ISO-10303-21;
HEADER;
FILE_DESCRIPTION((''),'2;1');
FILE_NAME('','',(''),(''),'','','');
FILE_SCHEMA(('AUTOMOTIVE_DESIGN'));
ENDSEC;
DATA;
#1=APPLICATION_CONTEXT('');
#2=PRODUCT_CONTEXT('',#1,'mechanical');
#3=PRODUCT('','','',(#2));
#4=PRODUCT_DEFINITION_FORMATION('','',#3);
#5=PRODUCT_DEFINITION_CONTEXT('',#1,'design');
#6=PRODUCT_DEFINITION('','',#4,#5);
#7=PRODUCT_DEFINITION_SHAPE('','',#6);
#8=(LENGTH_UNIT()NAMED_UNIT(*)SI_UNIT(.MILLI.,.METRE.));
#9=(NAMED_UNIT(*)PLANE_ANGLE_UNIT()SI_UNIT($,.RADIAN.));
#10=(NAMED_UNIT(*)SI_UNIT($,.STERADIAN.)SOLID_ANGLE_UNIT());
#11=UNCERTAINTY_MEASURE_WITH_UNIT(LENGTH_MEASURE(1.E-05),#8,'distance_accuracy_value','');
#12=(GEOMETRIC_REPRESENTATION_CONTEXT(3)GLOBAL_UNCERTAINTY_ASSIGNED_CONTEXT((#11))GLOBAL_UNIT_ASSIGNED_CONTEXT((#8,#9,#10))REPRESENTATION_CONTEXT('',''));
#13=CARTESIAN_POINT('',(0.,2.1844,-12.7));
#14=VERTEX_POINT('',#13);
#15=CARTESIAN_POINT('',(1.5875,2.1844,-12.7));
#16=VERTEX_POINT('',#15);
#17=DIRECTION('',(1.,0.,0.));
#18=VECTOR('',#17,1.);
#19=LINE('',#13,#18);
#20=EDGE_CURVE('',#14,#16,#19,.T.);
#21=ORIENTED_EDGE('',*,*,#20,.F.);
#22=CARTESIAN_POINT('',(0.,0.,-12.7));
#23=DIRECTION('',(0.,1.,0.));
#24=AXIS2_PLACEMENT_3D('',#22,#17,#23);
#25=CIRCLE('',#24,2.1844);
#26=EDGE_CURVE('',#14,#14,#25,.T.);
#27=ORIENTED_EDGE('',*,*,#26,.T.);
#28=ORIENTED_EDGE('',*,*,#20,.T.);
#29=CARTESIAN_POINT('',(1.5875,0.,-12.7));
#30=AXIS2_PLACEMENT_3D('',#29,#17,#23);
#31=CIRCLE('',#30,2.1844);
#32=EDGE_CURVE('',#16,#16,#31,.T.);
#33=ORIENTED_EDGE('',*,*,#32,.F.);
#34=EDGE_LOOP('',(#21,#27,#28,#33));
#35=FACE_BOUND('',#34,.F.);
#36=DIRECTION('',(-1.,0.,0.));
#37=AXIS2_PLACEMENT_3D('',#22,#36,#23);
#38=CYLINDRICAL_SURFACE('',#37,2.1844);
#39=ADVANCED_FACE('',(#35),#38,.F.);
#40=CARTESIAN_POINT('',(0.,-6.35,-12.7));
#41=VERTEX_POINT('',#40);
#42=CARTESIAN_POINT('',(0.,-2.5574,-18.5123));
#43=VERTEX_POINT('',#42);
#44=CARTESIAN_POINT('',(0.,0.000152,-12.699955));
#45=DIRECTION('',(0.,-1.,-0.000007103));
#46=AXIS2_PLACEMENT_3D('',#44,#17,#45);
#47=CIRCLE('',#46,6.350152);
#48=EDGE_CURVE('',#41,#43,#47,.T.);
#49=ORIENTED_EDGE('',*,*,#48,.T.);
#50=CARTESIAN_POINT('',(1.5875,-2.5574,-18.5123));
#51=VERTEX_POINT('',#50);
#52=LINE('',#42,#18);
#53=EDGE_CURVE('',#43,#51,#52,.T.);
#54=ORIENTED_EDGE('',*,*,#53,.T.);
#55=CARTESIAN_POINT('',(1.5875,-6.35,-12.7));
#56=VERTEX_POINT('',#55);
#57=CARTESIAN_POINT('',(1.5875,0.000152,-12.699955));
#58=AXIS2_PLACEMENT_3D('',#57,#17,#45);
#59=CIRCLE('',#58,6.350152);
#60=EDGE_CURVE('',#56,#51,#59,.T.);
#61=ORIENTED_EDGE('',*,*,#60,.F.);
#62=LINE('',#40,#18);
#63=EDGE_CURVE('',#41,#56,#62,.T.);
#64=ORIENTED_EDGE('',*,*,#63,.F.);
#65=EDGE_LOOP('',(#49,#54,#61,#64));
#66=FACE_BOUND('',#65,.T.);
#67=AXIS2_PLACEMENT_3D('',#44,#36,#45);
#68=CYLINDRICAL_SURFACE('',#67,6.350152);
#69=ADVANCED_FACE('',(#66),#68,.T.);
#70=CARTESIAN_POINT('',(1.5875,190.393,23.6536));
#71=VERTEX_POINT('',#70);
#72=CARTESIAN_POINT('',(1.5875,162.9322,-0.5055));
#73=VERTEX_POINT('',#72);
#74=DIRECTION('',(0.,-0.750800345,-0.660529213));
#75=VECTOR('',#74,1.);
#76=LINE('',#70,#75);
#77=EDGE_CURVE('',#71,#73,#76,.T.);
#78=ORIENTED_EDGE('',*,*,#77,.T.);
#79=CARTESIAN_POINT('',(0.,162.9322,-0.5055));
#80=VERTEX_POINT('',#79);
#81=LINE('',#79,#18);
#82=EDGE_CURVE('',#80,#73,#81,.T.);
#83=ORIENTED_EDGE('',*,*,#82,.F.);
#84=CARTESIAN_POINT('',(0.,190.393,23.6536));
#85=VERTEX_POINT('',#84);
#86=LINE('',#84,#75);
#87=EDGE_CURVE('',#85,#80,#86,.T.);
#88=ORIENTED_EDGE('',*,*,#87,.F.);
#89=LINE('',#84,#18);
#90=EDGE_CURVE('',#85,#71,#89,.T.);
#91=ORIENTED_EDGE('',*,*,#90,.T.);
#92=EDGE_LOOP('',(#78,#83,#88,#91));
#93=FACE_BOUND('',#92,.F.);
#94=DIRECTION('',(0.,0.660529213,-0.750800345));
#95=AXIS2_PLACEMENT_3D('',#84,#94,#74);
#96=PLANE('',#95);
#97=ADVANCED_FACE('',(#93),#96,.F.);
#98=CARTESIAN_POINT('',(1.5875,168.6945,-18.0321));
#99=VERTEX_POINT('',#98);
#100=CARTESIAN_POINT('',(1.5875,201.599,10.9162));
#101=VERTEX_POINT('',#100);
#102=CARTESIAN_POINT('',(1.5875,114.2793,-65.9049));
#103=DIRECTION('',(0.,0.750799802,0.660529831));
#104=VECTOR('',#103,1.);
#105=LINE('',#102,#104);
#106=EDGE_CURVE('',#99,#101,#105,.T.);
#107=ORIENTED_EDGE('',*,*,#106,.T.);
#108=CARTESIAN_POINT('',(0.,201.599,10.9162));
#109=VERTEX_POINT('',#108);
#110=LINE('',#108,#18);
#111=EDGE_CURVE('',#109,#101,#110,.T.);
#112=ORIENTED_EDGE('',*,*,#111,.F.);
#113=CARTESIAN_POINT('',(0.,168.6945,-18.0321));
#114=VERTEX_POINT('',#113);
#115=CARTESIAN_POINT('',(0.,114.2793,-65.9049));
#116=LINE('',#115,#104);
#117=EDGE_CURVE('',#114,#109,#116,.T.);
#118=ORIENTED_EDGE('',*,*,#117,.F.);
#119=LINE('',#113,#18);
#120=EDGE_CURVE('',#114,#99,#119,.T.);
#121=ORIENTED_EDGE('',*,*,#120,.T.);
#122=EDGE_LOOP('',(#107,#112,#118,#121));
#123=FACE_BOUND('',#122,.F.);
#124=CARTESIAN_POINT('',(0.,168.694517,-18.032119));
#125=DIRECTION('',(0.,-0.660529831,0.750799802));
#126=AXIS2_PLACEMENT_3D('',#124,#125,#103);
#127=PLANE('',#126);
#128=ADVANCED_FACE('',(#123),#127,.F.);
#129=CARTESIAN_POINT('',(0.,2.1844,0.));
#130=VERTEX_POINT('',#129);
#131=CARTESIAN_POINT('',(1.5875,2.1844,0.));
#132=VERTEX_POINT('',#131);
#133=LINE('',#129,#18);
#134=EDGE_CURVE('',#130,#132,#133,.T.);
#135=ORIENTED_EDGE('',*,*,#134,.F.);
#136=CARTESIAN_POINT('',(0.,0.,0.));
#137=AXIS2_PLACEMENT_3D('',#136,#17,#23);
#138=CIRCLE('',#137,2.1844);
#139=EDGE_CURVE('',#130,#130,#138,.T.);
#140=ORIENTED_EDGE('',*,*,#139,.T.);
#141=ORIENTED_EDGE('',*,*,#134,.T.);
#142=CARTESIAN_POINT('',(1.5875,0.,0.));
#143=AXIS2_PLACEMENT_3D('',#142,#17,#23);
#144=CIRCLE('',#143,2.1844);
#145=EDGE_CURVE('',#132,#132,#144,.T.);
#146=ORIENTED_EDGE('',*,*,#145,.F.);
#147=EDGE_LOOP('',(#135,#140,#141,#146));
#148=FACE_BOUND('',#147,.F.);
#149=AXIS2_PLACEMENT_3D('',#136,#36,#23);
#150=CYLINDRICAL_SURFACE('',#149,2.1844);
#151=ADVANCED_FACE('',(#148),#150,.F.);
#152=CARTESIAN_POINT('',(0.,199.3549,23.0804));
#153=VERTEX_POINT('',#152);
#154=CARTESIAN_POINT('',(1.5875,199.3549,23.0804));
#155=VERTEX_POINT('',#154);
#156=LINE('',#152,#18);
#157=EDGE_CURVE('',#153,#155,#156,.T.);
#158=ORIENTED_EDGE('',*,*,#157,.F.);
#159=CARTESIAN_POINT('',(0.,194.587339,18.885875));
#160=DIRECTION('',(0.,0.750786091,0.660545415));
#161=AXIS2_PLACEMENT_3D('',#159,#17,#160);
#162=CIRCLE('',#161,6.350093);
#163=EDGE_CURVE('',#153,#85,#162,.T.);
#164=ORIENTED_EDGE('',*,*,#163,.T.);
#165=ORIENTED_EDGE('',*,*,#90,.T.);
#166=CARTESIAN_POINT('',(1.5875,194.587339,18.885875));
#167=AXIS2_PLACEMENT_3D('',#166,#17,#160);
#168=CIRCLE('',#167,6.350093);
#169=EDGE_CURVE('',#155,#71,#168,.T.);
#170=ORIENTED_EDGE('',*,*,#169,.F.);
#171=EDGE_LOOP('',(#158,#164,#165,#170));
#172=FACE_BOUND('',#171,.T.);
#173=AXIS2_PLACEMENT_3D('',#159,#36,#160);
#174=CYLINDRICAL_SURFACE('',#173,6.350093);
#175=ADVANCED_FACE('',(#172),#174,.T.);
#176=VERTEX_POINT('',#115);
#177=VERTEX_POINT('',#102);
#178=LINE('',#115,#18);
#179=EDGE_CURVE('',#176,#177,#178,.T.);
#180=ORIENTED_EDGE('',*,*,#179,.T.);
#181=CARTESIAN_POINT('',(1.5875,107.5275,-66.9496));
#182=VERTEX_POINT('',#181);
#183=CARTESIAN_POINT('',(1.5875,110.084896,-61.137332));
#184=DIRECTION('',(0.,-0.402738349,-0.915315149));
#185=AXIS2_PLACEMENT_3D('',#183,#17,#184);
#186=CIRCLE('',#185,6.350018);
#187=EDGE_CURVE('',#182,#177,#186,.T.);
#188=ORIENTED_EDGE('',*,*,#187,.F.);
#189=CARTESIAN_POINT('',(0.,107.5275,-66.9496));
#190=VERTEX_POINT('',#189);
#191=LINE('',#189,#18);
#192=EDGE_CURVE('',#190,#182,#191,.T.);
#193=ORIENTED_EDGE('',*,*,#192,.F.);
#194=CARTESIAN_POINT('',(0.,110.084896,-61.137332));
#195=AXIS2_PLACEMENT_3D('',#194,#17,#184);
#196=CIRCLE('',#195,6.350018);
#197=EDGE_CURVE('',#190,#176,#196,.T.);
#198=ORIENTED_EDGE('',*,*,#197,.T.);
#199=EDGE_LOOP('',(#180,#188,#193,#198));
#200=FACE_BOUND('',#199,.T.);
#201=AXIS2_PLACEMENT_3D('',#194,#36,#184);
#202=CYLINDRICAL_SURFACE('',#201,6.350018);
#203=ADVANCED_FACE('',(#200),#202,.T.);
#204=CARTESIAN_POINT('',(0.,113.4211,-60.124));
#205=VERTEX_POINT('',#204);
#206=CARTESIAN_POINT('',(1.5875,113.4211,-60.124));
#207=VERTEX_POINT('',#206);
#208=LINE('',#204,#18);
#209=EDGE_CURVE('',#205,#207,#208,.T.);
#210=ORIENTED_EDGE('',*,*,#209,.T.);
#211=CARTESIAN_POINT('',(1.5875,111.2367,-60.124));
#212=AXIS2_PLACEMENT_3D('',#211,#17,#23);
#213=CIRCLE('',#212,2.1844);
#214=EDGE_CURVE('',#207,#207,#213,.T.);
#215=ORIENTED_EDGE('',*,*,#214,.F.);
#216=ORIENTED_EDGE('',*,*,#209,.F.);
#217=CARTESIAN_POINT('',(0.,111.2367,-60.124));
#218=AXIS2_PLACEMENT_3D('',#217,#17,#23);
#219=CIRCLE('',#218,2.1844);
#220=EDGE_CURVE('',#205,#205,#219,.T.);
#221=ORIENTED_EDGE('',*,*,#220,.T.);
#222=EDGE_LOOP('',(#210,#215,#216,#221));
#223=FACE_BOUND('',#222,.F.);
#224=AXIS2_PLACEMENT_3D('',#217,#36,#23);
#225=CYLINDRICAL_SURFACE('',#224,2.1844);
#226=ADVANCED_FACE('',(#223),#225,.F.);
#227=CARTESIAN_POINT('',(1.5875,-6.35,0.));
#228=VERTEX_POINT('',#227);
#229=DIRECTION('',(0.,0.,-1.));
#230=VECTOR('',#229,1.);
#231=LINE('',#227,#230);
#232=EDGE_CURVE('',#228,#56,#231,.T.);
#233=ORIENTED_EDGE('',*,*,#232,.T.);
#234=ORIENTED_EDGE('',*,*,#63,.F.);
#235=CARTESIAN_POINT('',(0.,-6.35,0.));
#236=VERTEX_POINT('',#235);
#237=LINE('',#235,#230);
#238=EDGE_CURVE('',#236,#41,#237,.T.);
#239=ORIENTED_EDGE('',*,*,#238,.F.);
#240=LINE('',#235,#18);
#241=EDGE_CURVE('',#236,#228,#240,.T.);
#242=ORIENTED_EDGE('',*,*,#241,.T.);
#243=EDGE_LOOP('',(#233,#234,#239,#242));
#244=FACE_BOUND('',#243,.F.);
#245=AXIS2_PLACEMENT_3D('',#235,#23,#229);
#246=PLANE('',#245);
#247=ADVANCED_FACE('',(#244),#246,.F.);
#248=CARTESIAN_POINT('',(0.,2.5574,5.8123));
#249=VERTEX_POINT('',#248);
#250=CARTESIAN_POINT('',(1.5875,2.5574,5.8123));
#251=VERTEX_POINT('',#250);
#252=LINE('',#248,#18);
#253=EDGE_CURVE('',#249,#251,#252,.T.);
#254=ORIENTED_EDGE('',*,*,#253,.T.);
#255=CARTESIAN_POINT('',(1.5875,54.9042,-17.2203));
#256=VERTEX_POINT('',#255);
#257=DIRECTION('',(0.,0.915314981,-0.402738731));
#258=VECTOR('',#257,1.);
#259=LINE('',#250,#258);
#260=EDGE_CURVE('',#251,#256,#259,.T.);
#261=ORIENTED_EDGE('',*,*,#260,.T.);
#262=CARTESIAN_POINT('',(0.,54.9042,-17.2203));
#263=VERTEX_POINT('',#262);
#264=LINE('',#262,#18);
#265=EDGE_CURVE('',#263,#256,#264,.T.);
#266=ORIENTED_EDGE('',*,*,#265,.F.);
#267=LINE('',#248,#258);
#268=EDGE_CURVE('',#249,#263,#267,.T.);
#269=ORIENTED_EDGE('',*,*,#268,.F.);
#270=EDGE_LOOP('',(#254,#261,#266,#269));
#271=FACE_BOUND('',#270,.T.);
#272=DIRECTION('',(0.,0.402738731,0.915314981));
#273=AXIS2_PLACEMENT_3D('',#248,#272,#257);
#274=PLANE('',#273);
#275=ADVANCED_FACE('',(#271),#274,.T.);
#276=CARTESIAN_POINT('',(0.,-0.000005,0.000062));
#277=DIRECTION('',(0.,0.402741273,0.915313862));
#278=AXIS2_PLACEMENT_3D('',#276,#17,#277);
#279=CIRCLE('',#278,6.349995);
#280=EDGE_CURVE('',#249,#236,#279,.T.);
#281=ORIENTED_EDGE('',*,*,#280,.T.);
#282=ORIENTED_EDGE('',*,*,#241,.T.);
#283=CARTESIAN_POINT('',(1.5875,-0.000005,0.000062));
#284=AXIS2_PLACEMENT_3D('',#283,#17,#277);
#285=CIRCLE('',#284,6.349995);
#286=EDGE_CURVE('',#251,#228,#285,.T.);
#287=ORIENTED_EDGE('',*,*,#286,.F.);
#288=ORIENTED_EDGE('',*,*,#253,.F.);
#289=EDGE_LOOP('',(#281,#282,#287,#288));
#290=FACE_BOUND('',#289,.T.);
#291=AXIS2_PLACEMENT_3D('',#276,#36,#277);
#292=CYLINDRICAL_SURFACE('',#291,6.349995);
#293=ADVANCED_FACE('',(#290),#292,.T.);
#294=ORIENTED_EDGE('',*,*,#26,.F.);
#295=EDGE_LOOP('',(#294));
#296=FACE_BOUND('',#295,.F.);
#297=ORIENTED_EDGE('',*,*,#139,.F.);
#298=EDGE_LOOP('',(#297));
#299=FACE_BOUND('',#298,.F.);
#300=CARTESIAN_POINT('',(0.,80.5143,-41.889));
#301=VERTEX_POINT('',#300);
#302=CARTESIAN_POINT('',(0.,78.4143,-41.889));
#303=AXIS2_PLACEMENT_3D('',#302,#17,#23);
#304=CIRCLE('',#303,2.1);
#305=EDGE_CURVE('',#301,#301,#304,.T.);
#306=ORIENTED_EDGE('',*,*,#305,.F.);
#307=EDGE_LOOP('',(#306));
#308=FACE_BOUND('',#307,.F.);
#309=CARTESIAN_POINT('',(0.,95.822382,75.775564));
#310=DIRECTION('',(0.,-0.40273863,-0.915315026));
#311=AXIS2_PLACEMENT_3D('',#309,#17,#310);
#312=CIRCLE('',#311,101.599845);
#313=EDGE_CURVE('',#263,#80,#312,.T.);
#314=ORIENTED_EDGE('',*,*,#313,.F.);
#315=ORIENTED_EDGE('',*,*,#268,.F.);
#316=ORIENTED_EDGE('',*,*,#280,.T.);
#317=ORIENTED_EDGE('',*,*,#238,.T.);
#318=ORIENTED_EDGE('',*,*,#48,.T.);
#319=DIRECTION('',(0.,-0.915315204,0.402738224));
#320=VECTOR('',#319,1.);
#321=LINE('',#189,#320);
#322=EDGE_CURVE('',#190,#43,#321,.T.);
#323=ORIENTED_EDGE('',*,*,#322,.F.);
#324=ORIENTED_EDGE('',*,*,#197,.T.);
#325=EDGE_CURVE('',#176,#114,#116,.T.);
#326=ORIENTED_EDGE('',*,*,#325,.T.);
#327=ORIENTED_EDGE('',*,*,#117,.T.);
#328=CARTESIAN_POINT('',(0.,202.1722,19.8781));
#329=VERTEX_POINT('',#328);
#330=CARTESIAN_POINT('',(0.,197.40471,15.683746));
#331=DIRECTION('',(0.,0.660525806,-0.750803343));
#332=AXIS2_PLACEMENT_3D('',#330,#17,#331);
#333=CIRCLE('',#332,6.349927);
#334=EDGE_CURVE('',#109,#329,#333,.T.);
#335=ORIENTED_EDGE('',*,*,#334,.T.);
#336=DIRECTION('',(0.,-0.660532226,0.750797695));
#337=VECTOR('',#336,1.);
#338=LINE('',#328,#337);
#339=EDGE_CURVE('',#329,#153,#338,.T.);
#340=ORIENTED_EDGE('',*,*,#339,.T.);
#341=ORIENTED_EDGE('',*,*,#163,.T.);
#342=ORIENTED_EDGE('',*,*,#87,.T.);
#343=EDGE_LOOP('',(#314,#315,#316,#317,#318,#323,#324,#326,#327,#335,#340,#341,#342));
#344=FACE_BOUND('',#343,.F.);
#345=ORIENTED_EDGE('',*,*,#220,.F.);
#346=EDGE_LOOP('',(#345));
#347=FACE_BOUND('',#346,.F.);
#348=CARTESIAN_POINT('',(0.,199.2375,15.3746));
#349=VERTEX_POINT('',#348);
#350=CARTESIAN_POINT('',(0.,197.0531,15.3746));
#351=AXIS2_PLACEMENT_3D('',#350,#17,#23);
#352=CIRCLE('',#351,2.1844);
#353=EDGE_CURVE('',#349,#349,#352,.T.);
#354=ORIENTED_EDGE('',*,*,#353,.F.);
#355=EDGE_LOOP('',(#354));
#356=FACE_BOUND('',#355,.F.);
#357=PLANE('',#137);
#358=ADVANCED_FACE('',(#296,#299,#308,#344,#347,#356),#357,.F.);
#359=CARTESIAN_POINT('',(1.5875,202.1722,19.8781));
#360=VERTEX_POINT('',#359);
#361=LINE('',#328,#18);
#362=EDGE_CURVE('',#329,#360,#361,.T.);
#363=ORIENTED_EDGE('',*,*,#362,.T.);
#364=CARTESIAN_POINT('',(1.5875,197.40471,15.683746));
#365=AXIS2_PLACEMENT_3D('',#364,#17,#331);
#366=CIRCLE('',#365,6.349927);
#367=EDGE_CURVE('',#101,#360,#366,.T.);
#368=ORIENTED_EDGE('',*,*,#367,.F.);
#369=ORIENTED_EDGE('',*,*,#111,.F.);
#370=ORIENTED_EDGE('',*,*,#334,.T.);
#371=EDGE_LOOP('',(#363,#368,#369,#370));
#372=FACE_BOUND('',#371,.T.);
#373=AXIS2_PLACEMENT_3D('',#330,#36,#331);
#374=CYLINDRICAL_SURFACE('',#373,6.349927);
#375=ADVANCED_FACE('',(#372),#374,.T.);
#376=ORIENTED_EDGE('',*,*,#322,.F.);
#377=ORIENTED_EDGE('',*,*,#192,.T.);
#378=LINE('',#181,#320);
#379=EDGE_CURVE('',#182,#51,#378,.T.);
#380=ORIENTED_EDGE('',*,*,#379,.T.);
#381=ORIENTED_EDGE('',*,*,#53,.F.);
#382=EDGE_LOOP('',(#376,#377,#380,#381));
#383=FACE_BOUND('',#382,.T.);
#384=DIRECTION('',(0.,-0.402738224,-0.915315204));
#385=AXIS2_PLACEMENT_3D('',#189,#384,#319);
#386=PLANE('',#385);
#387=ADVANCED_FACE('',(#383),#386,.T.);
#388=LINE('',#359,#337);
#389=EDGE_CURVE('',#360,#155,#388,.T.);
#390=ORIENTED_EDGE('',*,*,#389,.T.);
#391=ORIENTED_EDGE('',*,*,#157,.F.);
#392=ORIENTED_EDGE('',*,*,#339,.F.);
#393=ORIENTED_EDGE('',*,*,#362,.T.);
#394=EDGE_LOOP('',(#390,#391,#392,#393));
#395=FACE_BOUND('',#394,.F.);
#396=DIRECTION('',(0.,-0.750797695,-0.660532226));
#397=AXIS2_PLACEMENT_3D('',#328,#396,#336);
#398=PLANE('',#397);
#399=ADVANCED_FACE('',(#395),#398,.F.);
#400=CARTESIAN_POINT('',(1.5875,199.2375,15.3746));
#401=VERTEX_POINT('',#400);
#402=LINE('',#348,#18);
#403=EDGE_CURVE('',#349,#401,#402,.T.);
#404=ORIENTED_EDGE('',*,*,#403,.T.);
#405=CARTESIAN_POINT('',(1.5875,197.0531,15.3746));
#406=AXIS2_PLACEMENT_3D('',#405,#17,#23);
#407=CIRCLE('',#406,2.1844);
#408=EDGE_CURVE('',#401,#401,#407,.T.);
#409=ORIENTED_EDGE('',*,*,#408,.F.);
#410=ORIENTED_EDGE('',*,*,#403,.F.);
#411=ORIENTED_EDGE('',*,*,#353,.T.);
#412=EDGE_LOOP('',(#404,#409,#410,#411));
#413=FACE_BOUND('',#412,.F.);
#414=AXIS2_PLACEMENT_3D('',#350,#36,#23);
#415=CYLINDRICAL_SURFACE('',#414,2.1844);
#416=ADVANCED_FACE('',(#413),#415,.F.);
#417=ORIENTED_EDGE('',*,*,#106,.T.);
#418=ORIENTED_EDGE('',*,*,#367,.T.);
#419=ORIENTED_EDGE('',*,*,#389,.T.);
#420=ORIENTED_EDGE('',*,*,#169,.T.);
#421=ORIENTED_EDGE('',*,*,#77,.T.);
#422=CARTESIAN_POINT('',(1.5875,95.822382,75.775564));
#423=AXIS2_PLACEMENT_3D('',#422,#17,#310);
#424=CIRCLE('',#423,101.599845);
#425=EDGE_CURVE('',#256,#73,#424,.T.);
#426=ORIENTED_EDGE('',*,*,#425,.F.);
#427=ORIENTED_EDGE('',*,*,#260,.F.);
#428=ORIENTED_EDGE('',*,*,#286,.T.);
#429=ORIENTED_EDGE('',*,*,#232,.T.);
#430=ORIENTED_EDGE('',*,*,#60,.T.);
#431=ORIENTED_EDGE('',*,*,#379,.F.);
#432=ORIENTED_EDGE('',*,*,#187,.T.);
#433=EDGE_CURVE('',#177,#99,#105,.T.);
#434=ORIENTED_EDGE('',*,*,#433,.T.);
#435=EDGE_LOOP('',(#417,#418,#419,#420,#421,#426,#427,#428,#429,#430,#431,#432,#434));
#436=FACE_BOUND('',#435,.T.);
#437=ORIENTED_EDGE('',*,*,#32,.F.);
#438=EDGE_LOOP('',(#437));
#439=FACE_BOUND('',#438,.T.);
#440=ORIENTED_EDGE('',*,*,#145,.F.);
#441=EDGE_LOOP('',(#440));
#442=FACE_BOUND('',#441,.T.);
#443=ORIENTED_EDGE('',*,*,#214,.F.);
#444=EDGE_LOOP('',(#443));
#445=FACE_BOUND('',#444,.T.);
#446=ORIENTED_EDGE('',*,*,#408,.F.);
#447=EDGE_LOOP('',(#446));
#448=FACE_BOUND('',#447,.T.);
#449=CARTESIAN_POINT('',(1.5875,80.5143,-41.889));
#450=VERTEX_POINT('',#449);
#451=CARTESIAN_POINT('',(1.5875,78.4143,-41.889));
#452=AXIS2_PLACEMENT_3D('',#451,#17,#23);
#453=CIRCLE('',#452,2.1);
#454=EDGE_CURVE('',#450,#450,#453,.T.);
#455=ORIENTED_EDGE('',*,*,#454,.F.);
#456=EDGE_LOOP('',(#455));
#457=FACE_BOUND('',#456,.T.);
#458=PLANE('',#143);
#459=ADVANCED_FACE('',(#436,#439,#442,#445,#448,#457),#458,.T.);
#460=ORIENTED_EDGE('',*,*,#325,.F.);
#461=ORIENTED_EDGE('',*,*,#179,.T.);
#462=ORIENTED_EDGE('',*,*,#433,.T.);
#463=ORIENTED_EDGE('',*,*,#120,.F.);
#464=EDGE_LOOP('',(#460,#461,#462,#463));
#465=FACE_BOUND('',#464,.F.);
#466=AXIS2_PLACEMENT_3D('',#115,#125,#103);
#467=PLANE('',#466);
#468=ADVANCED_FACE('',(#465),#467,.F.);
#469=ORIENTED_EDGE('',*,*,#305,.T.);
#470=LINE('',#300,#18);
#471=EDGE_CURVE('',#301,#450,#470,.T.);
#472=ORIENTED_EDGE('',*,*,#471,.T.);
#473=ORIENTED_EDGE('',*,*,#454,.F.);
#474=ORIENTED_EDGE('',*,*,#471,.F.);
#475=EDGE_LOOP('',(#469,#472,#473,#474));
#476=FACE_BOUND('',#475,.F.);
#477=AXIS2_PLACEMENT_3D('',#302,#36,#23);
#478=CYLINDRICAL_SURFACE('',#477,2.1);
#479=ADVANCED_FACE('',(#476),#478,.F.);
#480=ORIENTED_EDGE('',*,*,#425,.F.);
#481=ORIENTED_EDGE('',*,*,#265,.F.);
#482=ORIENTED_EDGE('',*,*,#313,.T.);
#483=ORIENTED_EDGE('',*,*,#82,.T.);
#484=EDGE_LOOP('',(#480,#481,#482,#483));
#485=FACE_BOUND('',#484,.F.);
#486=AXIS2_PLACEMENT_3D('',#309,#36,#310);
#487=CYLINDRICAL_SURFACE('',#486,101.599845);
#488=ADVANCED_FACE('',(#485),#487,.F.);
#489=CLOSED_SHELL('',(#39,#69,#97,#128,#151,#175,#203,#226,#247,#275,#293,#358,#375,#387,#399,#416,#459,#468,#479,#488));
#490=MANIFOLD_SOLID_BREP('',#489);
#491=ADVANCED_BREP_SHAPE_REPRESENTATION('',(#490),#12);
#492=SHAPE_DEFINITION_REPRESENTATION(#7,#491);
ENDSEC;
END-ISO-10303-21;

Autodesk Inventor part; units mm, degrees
ref_plane "YZ Plane" through (0, 0, 0) normal (1, 0, 0) x (0, 1, 0)
ref_plane "XZ Plane" through (0, 0, 0) normal (0, 1, 0) x (-1, 0, 0)
ref_plane "XY Plane" through (0, 0, 0) normal (0, 0, 1) x (1, 0, 0)
sketch "main" plane through (0, 0, 0) normal (0, 0, 1) x (1, 0, 0)
  circle A0 centre (-11.2144, -104.2473) radius 2.1844
  circle A1 centre (1.4856, -104.2473) radius 2.1844
  circle A2 centre (48.9096, 6.9894) radius 2.1844
  circle A3 centre (-26.5889, 92.8058) radius 2.1844
  arc A4 (1.4856, -110.5973) -> (7.2979, -106.8047) centre (1.4856, -104.2473) ccw
  arc A5 (-17.0266, -101.6899) -> (-11.2144, -110.5973) centre (-11.2144, -104.2473) ccw
  line L0 (54.6905, 10.0319) -> (-22.1306, 97.3516)
  line L1 (55.7352, 3.2802) -> (7.2979, -106.8047)
  line L2 (-31.0925, 97.9248) -> (-34.2947, 95.1076)
  line L3 (-33.7837, 110.5973) -> (6.8178, 64.4472)
  line L4 (-17.0266, -101.6899) -> (6.006, -49.3432)
  line L5 (-34.8679, 86.1457) -> (-10.7088, 58.6849)
  arc A6 (-34.2947, 95.1076) -> (-34.8679, 86.1457) centre (-30.1004, 90.34) ccw
  arc A7 (-22.1306, 97.3516) -> (-31.0925, 97.9248) centre (-26.8981, 93.1573) ccw
  arc A8 (55.7352, 3.2802) -> (54.6905, 10.0319) centre (49.923, 5.8376) ccw
  arc A9 (6.006, -49.3432) -> (-10.7088, 58.6849) centre (-86.9901, -8.425) ccw
  line L6 (-11.2144, -110.5973) -> (1.4856, -110.5973)
  point P0 (16.4228, 13.0791)
  point P1 (-26.3249, 102.1192)
  point P2 (49.8339, -10.1318)
  dimension "d9" = 6.35
  dimension "d10" = 6.35
  dimension "d11" = 101.6
sketch "Sketch1" plane through (0, 0, 0) normal (1, 0, 0) x (0, 1, 0)
  circle A0 centre (78.4143, -41.889) radius 2.1 projected
  circle A1 centre (0, 0) radius 2.1844
  circle A2 centre (0, -12.7) radius 2.1844
  circle A3 centre (111.2367, -60.124) radius 2.1844
  circle A4 centre (197.0531, 15.3746) radius 2.1844
  arc A5 (-6.35, -12.7) -> (-2.5574, -18.5123) centre (0, -12.7) ccw
  arc A6 (2.5574, 5.8123) -> (-6.35, 0) centre (0, 0) ccw
  line L0 (114.2793, -65.9049) -> (201.599, 10.9162)
  line L1 (107.5275, -66.9496) -> (-2.5574, -18.5123)
  line L2 (202.1722, 19.8781) -> (199.3549, 23.0804)
  line L3 (214.8446, 22.5693) -> (168.6945, -18.0321)
  line L4 (2.5574, 5.8123) -> (54.9042, -17.2203)
  line L5 (190.393, 23.6536) -> (162.9322, -0.5055)
  arc A7 (199.3549, 23.0804) -> (190.393, 23.6536) centre (194.5874, 18.886) ccw
  arc A8 (201.599, 10.9162) -> (202.1722, 19.8781) centre (197.4046, 15.6838) ccw
  arc A9 (107.5275, -66.9496) -> (114.2793, -65.9049) centre (110.0849, -61.1373) ccw
  arc A10 (54.9042, -17.2203) -> (162.9322, -0.5055) centre (95.8224, 75.7757) ccw
  line L6 (-6.35, 0) -> (-6.35, -12.7)
  point P0 (0, 0)
extrude "Extrusion1" add sketch "Sketch1" along normal blind 1.5875
properties part number "Support Gusset" material "Acetal Resin, White"
